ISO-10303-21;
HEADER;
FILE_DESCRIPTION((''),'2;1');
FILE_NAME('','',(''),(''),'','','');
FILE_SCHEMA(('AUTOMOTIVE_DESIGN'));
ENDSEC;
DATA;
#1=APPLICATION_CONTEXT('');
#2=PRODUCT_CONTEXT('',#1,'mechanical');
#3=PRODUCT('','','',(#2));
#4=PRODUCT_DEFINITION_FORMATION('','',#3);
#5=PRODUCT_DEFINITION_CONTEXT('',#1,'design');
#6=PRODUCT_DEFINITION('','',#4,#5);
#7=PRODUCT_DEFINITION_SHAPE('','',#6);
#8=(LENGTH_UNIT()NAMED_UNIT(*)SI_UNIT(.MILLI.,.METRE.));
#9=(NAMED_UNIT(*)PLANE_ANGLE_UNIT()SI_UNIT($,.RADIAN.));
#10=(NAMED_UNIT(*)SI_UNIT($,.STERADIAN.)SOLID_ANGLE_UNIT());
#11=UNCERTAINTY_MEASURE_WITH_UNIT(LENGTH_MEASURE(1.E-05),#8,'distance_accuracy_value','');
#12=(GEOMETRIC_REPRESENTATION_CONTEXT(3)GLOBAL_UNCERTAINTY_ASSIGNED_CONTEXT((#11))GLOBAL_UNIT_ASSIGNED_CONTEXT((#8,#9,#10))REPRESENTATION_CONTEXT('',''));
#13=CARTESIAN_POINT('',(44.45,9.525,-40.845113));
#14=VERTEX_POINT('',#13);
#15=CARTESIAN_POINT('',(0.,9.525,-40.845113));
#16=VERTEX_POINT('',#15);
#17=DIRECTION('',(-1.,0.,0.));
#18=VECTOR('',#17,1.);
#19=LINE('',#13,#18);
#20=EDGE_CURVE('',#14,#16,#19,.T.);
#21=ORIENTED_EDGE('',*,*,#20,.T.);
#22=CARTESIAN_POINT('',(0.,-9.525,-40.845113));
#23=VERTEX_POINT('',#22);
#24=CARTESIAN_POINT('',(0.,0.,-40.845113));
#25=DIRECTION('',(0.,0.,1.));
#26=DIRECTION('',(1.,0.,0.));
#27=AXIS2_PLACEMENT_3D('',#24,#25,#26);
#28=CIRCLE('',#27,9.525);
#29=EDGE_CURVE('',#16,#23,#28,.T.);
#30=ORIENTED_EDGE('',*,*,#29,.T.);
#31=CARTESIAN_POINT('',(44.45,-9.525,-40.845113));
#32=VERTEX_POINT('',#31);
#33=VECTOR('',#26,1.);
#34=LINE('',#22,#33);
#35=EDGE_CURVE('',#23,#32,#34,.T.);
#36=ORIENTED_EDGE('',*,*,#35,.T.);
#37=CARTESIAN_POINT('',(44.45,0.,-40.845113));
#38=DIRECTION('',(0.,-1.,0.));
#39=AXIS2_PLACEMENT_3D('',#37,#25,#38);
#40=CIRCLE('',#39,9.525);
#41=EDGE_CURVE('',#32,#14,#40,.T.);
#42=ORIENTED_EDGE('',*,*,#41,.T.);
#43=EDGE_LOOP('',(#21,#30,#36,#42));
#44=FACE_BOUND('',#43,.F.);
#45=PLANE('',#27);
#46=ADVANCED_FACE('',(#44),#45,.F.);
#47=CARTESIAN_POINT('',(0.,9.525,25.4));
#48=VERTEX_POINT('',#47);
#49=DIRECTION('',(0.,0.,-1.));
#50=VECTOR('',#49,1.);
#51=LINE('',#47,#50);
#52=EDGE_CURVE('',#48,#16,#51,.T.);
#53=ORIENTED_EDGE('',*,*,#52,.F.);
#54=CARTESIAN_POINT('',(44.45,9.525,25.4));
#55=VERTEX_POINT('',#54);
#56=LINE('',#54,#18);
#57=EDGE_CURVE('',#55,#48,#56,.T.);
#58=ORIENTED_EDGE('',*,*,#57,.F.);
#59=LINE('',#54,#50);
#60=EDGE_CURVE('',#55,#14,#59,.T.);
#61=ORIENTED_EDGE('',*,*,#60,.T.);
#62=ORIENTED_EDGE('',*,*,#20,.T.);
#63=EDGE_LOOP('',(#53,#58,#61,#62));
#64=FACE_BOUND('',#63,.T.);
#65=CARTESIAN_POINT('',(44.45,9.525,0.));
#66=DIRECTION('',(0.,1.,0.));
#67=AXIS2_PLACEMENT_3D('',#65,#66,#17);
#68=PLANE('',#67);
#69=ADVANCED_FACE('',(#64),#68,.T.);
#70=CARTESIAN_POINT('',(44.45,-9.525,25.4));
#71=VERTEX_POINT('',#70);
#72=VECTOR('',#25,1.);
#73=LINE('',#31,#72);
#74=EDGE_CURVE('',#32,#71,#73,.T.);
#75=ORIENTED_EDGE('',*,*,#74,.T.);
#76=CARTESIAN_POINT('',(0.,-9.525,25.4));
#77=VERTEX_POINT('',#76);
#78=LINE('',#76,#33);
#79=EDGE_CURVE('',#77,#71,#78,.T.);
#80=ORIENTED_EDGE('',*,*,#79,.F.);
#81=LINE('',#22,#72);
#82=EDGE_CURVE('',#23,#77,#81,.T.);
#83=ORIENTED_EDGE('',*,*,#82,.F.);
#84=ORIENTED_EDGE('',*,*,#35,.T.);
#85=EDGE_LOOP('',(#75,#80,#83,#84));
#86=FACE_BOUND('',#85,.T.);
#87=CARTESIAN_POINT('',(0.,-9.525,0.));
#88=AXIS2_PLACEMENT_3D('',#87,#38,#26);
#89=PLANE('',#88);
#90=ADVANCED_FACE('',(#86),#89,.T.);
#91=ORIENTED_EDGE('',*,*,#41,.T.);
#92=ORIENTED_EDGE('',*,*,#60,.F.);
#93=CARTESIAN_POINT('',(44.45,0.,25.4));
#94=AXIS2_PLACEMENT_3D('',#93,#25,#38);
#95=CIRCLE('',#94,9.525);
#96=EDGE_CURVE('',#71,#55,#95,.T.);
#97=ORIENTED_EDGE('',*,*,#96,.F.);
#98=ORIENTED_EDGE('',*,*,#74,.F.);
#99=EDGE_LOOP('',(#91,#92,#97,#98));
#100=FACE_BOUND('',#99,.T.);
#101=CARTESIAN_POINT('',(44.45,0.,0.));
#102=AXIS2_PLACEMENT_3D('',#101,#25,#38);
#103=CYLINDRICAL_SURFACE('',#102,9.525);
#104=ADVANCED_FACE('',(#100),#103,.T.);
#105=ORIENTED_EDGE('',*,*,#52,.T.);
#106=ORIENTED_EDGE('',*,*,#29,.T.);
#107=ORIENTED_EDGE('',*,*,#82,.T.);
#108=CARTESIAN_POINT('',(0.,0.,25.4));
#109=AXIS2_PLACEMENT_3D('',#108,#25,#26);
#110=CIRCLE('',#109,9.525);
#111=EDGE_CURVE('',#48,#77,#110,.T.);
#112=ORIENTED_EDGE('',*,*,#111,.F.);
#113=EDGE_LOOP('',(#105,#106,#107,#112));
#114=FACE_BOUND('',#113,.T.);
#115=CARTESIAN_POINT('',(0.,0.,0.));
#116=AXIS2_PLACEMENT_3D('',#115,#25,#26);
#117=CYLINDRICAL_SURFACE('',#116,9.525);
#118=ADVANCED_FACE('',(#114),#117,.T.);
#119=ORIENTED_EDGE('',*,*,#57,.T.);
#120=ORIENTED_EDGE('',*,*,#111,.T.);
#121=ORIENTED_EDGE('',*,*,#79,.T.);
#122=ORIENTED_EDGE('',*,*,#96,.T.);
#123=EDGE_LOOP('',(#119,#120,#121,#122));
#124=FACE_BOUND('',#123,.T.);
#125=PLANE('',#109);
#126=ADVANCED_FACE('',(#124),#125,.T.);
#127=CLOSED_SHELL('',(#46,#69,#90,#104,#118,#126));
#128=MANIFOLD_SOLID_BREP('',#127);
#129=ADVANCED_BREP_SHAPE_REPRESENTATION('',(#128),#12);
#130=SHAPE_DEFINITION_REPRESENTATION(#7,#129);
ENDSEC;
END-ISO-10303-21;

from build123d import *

# Parameters (mm, degrees)
F1_DEPTH = 25.4
F4_DEPTH = 40.8451128751


# Not quite as in the source:
# - the program builds the solid bodies; features that only make, move or delete a surface that nothing else refers to are left out


with BuildPart() as f1:
    # F0 (on Top) → F1 (new body)
    with BuildSketch(Plane.XY):
        with BuildLine():
            ThreePointArc((0, -9.525), (6.7351920908, -6.7351920908), (9.525, 0))
            ThreePointArc((9.525, 0), (6.7351920908, 6.7351920908), (0, 9.525))
            ThreePointArc((0, 9.525), (-9.525, 0), (0, -9.525))
        make_face()
        with BuildLine():
            ThreePointArc((0, 9.525), (6.7351920908, 6.7351920908), (9.525, 0))
            ThreePointArc((9.525, 0), (6.7351920908, -6.7351920908), (0, -9.525))
            Line((0, -9.525), (44.45, -9.525))
            ThreePointArc((44.45, -9.525), (34.925, 0), (44.45, 9.525))
            Line((44.45, 9.525), (0, 9.525))
        make_face()
        with BuildLine():
            ThreePointArc((53.975, 0), (51.1851920908, 6.7351920908), (44.45, 9.525))
            ThreePointArc((44.45, 9.525), (34.925, 0), (44.45, -9.525))
            ThreePointArc((44.45, -9.525), (51.1851920908, -6.7351920908), (53.975, 0))
        make_face()
    extrude(amount=F1_DEPTH)

    # F4 (add): a face of the model
    f4_faces = [f1.faces().sort_by_distance(p)[0] for p in [
        (22.225, 0, 0),
    ]]
    extrude(f4_faces, amount=F4_DEPTH)


solid = f1.part
